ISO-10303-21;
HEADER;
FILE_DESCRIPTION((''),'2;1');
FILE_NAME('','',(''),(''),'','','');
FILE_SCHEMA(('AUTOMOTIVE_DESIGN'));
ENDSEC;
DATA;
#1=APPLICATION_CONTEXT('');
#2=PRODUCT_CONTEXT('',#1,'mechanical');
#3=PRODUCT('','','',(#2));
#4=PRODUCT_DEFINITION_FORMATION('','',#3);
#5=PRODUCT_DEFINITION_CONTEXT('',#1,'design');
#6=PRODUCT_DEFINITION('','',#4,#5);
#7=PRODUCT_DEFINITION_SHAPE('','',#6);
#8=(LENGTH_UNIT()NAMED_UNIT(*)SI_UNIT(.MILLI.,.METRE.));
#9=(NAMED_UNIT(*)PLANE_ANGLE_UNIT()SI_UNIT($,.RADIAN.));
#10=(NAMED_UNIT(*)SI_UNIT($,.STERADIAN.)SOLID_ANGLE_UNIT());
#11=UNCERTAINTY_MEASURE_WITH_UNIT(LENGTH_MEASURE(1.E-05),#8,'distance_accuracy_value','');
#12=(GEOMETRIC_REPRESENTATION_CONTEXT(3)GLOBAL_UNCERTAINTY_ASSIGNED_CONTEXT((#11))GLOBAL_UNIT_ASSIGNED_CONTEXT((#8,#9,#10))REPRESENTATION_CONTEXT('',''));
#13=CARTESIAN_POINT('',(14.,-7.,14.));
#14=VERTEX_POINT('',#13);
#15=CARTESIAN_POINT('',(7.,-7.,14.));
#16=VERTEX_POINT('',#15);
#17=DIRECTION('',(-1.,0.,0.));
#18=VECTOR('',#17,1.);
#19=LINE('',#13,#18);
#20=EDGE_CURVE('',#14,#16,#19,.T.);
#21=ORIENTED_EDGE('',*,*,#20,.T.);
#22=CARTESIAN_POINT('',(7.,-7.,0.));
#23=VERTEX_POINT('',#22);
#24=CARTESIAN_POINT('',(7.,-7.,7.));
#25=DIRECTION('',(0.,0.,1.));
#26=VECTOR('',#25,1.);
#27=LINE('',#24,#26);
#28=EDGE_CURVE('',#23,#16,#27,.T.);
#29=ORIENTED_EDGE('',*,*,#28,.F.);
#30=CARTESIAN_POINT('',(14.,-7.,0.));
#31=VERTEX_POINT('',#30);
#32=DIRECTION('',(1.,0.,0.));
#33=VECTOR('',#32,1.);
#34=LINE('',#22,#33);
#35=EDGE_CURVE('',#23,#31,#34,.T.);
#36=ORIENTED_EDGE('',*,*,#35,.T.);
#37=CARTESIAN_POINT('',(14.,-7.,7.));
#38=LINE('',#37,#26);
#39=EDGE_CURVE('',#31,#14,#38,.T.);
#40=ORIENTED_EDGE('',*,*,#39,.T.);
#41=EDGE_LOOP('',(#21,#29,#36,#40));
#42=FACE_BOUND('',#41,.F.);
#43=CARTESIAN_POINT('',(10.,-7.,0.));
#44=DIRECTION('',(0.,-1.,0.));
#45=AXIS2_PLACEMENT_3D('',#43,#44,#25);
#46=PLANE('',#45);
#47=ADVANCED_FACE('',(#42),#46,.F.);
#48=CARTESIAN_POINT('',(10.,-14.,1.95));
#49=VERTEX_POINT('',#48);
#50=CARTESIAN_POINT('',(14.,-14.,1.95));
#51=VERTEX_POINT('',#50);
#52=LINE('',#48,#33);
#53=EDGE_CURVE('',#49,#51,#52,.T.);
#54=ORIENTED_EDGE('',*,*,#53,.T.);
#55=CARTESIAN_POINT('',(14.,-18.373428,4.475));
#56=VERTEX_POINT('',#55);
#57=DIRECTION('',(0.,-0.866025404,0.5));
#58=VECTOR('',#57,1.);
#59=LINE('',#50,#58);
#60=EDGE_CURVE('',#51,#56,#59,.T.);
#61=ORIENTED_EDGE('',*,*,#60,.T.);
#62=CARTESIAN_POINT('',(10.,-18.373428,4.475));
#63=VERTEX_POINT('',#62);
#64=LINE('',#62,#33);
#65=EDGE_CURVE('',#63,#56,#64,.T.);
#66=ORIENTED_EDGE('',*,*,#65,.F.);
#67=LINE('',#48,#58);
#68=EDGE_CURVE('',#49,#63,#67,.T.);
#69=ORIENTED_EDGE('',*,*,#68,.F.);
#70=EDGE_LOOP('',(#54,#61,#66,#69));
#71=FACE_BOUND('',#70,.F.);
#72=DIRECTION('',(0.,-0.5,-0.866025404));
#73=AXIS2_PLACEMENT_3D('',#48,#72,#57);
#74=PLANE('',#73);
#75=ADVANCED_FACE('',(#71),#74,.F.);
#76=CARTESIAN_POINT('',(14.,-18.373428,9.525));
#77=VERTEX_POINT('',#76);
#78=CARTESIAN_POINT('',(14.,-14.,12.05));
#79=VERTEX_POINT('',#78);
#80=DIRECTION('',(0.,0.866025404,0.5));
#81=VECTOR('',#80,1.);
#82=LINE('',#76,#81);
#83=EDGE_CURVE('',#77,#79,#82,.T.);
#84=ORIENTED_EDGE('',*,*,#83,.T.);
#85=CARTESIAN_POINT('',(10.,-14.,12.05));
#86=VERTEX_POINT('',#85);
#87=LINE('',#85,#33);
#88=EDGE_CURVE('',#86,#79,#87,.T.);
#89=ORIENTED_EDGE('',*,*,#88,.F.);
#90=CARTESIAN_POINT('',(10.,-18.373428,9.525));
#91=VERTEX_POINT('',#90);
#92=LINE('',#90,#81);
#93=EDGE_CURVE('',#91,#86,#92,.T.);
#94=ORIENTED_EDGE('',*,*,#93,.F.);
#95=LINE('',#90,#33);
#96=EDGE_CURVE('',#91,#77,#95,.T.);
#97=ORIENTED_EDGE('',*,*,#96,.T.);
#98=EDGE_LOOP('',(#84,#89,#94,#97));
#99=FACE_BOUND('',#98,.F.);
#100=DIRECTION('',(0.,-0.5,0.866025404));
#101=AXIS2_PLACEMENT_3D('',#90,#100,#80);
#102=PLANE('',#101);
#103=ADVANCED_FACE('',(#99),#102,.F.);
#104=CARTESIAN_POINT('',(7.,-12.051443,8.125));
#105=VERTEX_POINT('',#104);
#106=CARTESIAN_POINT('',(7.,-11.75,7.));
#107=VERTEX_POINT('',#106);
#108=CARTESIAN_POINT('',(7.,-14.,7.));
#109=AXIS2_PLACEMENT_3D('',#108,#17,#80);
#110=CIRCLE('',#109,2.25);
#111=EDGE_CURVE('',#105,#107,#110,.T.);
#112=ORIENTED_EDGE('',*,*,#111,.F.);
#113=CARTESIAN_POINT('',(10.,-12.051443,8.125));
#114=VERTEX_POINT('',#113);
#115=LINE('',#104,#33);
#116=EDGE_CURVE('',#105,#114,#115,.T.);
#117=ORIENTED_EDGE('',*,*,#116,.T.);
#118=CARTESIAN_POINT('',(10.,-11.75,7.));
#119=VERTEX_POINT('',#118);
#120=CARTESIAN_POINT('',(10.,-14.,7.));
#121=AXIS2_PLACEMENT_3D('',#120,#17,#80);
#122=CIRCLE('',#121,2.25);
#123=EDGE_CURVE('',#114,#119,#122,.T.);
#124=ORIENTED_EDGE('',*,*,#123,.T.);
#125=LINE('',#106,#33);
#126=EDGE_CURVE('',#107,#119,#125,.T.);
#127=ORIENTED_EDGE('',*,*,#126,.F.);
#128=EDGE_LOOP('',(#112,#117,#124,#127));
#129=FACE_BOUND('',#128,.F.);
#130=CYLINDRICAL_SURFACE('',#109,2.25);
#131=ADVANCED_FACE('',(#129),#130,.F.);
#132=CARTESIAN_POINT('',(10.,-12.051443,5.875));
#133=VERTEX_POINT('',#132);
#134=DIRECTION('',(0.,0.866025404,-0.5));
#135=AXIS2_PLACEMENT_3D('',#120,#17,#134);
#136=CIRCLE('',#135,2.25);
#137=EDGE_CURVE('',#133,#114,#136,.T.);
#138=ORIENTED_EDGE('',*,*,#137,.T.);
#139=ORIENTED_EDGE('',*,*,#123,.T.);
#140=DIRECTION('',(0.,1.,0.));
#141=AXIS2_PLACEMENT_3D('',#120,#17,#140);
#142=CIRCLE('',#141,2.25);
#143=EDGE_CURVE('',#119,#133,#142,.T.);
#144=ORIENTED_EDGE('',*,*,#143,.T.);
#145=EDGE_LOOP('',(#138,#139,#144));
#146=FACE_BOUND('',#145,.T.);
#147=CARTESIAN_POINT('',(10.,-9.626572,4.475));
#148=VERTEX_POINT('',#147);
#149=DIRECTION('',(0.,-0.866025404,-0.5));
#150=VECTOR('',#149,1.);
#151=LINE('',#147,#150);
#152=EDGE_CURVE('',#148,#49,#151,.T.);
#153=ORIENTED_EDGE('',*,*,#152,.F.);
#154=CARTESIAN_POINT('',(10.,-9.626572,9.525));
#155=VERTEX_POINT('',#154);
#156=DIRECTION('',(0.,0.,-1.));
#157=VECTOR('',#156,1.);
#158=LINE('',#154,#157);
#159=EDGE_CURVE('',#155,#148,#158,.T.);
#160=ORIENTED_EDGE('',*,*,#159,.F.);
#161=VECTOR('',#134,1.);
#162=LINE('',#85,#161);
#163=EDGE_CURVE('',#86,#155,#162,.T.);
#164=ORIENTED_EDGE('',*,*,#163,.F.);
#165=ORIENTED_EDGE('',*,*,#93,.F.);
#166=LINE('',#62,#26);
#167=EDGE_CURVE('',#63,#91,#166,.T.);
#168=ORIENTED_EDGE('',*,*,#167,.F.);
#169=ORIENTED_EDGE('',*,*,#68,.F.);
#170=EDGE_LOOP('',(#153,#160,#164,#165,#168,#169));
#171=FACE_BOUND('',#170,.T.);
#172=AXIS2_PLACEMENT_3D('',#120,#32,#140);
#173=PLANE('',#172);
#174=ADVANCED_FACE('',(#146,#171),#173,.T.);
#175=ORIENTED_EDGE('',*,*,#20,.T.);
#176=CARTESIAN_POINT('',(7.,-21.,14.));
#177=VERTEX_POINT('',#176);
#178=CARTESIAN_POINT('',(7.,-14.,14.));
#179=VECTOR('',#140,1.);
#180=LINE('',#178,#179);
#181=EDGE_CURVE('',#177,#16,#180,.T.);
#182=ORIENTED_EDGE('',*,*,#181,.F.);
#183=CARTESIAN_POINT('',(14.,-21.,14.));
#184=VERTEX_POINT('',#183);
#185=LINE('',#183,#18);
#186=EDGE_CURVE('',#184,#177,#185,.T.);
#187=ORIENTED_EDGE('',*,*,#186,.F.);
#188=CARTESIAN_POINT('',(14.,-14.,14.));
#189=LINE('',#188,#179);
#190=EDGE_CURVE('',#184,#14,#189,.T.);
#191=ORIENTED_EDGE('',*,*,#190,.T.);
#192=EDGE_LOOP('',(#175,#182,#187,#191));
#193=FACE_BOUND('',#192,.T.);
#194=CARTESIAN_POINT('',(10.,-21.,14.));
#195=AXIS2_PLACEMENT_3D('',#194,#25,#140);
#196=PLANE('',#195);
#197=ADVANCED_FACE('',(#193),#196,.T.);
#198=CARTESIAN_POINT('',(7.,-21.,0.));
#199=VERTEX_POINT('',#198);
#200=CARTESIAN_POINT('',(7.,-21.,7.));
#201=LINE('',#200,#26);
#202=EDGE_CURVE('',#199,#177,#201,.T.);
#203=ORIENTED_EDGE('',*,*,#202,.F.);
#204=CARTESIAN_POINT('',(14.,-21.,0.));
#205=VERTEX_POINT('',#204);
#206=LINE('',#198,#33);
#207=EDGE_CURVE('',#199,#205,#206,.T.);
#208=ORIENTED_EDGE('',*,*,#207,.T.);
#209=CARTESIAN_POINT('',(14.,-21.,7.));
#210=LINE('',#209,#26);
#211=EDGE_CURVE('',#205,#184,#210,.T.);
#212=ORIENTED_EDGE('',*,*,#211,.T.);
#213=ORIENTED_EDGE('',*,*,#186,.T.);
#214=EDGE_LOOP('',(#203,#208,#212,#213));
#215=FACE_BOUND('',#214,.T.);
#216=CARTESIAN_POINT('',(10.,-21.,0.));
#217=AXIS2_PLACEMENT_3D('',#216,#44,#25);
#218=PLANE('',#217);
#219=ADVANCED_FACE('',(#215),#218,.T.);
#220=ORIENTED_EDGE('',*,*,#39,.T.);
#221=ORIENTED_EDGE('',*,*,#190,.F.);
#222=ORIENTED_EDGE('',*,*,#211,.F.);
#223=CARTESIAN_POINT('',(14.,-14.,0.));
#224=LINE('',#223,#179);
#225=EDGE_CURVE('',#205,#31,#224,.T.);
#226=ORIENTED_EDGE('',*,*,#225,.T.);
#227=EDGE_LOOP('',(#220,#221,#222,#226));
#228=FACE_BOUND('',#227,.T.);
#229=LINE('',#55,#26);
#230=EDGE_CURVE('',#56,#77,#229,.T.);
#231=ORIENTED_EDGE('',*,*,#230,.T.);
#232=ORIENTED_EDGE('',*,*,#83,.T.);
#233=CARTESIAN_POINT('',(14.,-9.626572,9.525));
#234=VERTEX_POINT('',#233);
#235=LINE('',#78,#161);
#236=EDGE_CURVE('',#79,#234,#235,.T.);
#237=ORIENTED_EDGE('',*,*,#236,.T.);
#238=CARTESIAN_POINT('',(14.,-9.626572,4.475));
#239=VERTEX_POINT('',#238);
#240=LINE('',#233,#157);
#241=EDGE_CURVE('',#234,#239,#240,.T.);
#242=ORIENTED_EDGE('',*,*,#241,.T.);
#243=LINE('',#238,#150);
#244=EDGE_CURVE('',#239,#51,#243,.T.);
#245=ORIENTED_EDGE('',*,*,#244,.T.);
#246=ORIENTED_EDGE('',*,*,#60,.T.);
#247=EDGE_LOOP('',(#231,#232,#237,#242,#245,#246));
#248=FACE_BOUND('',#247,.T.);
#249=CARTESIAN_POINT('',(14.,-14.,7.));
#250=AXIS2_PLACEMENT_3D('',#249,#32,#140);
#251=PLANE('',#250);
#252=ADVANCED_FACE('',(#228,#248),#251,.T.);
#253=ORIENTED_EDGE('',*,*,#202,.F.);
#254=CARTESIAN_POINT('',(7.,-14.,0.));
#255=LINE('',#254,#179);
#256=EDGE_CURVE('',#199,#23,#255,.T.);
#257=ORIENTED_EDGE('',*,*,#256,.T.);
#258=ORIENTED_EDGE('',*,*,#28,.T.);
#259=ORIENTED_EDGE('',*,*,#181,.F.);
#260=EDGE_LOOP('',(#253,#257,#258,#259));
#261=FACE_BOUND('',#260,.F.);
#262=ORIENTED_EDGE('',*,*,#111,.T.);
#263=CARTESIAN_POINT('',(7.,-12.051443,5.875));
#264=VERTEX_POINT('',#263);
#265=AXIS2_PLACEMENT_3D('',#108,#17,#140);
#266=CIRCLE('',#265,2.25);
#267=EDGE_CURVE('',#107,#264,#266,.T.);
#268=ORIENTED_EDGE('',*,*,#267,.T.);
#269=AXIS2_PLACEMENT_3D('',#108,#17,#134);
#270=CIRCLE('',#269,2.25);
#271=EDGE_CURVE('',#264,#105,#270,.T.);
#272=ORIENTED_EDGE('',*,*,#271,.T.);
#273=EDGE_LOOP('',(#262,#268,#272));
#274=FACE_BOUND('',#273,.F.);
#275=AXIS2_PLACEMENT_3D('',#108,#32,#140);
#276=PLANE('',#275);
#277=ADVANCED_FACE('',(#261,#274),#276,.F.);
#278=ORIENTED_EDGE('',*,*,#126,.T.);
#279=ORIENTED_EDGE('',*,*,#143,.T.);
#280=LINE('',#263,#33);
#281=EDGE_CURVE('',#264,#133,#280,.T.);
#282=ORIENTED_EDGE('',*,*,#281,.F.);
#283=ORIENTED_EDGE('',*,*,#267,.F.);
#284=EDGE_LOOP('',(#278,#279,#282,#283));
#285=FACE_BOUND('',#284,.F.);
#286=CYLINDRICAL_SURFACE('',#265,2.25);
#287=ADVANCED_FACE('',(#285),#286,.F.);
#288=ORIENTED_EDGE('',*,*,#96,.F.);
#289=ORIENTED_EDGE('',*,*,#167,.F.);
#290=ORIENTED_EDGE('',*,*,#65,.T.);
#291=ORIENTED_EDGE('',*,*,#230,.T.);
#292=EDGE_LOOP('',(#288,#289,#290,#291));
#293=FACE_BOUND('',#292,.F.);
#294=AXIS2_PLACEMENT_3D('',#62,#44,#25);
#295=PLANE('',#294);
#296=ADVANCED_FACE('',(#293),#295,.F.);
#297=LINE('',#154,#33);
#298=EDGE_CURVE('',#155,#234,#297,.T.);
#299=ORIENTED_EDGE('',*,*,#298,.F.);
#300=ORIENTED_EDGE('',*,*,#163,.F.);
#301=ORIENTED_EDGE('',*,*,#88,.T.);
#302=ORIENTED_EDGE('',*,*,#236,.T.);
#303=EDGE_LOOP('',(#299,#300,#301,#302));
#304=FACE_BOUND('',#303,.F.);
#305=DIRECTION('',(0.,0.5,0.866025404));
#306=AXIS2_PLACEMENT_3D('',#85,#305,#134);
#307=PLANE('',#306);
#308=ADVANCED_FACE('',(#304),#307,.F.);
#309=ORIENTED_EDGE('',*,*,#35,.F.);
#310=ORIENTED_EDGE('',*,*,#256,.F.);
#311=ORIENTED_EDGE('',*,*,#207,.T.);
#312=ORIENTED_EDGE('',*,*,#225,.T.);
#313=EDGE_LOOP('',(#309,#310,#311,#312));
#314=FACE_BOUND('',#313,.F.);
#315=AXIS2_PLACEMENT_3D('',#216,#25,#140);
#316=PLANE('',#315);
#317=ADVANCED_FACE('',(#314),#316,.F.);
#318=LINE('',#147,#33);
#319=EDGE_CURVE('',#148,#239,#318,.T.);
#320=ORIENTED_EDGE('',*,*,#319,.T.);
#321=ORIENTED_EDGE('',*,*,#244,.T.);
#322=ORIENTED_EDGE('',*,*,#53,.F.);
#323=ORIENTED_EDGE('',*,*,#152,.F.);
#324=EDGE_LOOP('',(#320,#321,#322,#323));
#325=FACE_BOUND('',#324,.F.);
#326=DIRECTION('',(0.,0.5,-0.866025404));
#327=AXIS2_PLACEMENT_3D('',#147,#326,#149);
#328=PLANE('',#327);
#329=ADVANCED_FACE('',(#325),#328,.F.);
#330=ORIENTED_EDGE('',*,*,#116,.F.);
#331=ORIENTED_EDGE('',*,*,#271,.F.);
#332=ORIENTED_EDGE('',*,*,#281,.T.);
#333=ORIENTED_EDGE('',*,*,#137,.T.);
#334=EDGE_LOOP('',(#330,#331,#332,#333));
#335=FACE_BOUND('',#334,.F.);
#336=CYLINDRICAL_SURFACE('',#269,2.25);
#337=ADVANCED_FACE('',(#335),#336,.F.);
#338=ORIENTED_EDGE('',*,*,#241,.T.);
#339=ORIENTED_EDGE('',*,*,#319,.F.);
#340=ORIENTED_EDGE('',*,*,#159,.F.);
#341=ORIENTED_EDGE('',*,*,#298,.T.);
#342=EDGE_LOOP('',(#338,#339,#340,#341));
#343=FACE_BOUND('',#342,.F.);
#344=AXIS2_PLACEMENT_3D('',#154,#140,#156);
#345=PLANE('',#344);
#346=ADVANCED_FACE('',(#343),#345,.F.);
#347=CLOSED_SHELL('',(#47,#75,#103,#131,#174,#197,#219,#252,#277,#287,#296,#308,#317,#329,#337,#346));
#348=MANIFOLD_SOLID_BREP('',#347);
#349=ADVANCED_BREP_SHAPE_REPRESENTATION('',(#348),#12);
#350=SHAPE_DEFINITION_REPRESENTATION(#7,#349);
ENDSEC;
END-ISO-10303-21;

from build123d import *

# Parameters (mm, degrees)
F0_W     = 14
F0_H     = 14
F1_DEPTH = 3
F2_W     = 14
F2_H     = 14
F3_DEPTH = 4
F4_ANGLE = -90
F5_ANGLE = -90


# Not quite as in the source:
# - a feature names something its author has since deleted; it is built from what else it names


with BuildPart() as f1:
    # F0 (on Top) → F1 (new body)
    with BuildSketch(Plane.XY):
        Rectangle(F0_W, F0_H)
        with BuildLine():
            ThreePointArc((1.9485571585, 1.125), (2.1733331092, 0.5823428515), (2.25, 0))
            ThreePointArc((2.25, 0), (2.1733331092, -0.5823428515), (1.9485571585, -1.125))
            ThreePointArc((1.9485571585, -1.125), (-2.25, 0), (1.9485571585, 1.125))
        make_face(mode=Mode.SUBTRACT)
    extrude(amount=F1_DEPTH)

    # F2 (on face) → F3 (join)
    with BuildSketch(Plane.XY.offset(3)):
        Rectangle(F2_W, F2_H)
        with BuildLine():
            ThreePointArc((4.3734282891, 2.525), (4.8779254228, 1.3070361778), (5.05, 0))
            ThreePointArc((5.05, 0), (4.8779254228, -1.3070361778), (4.3734282891, -2.525))
            ThreePointArc((4.3734282891, -2.525), (2.525, -4.3734282891), (0, -5.05))
            ThreePointArc((0, -5.05), (-2.525, -4.3734282891), (-4.3734282891, -2.525))
            ThreePointArc((-4.3734282891, -2.525), (-5.05, 0), (-4.3734282891, 2.525))
            ThreePointArc((-4.3734282891, 2.525), (-2.525, 4.3734282891), (0, 5.05))
            ThreePointArc((0, 5.05), (2.525, 4.3734282891), (4.3734282891, 2.525))
        make_face(mode=Mode.SUBTRACT)
        with BuildLine():
            Line((-4.3734282891, -2.525), (-4.3734282891, 2.525))
            ThreePointArc((-4.3734282891, 2.525), (-5.05, 0), (-4.3734282891, -2.525))
        make_face()
        with BuildLine():
            Line((-4.3734282891, 2.525), (0, 5.05))
            ThreePointArc((0, 5.05), (-2.525, 4.3734282891), (-4.3734282891, 2.525))
        make_face()
        with BuildLine():
            Line((0, 5.05), (4.3734282891, 2.525))
            ThreePointArc((4.3734282891, 2.525), (2.525, 4.3734282891), (0, 5.05))
        make_face()
        with BuildLine():
            ThreePointArc((4.3734282891, -2.525), (4.8779254228, -1.3070361778), (5.05, 0))
            ThreePointArc((5.05, 0), (4.8779254228, 1.3070361778), (4.3734282891, 2.525))
            Line((4.3734282891, 2.525), (4.3734282891, -2.525))
        make_face()
        with BuildLine():
            ThreePointArc((0, -5.05), (2.525, -4.3734282891), (4.3734282891, -2.525))
            Line((4.3734282891, -2.525), (0, -5.05))
        make_face()
        with BuildLine():
            ThreePointArc((-4.3734282891, -2.525), (-2.525, -4.3734282891), (0, -5.05))
            Line((0, -5.05), (-4.3734282891, -2.525))
        make_face()
    extrude(amount=F3_DEPTH)


with BuildPart() as f1_1:
    # F4: moved
    add(f1.part.rotate(Axis((0, -7, 0), (-1, 0, 0)), F4_ANGLE))


with BuildPart() as f1_2:
    # F5: moved
    add(f1_1.part.rotate(Axis((7, -7, 7), (0, 0, -1)), F5_ANGLE))


solid = f1_2.part
